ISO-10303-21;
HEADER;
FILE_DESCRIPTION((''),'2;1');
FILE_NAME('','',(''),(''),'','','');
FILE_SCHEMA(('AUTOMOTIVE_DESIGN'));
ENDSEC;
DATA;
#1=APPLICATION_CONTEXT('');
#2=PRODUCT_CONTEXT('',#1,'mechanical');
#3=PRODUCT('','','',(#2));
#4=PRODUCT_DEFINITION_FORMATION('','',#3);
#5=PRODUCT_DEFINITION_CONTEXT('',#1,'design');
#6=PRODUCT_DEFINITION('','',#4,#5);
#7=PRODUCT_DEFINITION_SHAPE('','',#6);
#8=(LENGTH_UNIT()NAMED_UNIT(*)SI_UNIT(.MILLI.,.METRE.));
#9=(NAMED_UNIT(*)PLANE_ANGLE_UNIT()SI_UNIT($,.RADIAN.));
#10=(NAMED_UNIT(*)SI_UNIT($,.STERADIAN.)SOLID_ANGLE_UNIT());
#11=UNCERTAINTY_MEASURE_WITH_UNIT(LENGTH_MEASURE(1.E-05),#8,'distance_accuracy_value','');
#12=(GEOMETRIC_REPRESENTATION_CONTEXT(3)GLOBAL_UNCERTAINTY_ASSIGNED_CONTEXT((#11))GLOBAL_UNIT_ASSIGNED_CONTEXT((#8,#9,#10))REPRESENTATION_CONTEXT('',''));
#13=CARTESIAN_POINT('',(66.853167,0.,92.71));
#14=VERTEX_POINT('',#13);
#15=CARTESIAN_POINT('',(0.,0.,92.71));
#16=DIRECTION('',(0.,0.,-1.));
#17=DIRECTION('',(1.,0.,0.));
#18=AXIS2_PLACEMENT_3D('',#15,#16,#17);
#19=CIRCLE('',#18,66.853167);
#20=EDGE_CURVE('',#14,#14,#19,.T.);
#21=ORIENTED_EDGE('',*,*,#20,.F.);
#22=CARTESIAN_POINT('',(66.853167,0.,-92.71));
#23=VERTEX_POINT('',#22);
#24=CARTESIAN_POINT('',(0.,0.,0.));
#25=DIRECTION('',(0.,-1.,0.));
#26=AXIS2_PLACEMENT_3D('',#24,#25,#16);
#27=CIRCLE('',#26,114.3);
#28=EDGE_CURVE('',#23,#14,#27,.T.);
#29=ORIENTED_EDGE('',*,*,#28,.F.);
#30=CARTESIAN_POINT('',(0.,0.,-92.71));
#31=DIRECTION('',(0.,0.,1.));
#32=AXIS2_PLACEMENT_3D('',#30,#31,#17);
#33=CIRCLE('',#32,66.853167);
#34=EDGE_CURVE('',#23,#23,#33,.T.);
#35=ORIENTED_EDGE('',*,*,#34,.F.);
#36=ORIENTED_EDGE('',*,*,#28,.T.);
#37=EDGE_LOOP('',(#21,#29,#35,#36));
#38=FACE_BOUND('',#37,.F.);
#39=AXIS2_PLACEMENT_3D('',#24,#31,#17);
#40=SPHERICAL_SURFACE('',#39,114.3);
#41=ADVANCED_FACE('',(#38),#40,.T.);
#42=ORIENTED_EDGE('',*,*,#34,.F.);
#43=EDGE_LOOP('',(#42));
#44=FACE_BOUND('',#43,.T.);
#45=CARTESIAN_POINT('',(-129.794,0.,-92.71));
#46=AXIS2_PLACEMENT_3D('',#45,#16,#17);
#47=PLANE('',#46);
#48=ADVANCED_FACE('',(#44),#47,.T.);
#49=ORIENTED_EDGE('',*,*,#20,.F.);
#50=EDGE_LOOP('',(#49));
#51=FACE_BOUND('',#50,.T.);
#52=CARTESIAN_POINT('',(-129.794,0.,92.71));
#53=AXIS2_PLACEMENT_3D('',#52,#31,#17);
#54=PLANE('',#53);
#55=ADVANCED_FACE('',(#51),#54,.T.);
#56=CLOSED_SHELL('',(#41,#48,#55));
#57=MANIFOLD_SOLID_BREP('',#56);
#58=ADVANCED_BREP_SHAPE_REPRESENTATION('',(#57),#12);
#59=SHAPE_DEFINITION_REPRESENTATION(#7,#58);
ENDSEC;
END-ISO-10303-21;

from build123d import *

# Parameters (mm, degrees)
F2_W          = 259.588
F2_H          = 37.084
F3_DEPTH      = 114.301
F3_DEPTH_BACK = 114.301


with BuildPart() as f1:
    # F0 (on Front) → F1 (revolve)
    with BuildSketch(Plane.XZ):
        with BuildLine():
            Line((0, 114.3), (0, -114.3))
            ThreePointArc((0, -114.3), (114.3, 0), (0, 114.3))
        make_face()
    revolve(axis=Axis((0, 0, 0), (0, 0, -1)))

    # F2 (on Front) → F3 (cut, two sides)
    with BuildSketch(Plane.XZ) as f3_sk:
        with Locations((0, 111.252)):
            Rectangle(F2_W, F2_H)
        with Locations((0, -111.252)):
            Rectangle(F2_W, F2_H)
    extrude(amount=-F3_DEPTH, mode=Mode.SUBTRACT)
    extrude(f3_sk.sketch, amount=F3_DEPTH_BACK, mode=Mode.SUBTRACT)


solid = f1.part
